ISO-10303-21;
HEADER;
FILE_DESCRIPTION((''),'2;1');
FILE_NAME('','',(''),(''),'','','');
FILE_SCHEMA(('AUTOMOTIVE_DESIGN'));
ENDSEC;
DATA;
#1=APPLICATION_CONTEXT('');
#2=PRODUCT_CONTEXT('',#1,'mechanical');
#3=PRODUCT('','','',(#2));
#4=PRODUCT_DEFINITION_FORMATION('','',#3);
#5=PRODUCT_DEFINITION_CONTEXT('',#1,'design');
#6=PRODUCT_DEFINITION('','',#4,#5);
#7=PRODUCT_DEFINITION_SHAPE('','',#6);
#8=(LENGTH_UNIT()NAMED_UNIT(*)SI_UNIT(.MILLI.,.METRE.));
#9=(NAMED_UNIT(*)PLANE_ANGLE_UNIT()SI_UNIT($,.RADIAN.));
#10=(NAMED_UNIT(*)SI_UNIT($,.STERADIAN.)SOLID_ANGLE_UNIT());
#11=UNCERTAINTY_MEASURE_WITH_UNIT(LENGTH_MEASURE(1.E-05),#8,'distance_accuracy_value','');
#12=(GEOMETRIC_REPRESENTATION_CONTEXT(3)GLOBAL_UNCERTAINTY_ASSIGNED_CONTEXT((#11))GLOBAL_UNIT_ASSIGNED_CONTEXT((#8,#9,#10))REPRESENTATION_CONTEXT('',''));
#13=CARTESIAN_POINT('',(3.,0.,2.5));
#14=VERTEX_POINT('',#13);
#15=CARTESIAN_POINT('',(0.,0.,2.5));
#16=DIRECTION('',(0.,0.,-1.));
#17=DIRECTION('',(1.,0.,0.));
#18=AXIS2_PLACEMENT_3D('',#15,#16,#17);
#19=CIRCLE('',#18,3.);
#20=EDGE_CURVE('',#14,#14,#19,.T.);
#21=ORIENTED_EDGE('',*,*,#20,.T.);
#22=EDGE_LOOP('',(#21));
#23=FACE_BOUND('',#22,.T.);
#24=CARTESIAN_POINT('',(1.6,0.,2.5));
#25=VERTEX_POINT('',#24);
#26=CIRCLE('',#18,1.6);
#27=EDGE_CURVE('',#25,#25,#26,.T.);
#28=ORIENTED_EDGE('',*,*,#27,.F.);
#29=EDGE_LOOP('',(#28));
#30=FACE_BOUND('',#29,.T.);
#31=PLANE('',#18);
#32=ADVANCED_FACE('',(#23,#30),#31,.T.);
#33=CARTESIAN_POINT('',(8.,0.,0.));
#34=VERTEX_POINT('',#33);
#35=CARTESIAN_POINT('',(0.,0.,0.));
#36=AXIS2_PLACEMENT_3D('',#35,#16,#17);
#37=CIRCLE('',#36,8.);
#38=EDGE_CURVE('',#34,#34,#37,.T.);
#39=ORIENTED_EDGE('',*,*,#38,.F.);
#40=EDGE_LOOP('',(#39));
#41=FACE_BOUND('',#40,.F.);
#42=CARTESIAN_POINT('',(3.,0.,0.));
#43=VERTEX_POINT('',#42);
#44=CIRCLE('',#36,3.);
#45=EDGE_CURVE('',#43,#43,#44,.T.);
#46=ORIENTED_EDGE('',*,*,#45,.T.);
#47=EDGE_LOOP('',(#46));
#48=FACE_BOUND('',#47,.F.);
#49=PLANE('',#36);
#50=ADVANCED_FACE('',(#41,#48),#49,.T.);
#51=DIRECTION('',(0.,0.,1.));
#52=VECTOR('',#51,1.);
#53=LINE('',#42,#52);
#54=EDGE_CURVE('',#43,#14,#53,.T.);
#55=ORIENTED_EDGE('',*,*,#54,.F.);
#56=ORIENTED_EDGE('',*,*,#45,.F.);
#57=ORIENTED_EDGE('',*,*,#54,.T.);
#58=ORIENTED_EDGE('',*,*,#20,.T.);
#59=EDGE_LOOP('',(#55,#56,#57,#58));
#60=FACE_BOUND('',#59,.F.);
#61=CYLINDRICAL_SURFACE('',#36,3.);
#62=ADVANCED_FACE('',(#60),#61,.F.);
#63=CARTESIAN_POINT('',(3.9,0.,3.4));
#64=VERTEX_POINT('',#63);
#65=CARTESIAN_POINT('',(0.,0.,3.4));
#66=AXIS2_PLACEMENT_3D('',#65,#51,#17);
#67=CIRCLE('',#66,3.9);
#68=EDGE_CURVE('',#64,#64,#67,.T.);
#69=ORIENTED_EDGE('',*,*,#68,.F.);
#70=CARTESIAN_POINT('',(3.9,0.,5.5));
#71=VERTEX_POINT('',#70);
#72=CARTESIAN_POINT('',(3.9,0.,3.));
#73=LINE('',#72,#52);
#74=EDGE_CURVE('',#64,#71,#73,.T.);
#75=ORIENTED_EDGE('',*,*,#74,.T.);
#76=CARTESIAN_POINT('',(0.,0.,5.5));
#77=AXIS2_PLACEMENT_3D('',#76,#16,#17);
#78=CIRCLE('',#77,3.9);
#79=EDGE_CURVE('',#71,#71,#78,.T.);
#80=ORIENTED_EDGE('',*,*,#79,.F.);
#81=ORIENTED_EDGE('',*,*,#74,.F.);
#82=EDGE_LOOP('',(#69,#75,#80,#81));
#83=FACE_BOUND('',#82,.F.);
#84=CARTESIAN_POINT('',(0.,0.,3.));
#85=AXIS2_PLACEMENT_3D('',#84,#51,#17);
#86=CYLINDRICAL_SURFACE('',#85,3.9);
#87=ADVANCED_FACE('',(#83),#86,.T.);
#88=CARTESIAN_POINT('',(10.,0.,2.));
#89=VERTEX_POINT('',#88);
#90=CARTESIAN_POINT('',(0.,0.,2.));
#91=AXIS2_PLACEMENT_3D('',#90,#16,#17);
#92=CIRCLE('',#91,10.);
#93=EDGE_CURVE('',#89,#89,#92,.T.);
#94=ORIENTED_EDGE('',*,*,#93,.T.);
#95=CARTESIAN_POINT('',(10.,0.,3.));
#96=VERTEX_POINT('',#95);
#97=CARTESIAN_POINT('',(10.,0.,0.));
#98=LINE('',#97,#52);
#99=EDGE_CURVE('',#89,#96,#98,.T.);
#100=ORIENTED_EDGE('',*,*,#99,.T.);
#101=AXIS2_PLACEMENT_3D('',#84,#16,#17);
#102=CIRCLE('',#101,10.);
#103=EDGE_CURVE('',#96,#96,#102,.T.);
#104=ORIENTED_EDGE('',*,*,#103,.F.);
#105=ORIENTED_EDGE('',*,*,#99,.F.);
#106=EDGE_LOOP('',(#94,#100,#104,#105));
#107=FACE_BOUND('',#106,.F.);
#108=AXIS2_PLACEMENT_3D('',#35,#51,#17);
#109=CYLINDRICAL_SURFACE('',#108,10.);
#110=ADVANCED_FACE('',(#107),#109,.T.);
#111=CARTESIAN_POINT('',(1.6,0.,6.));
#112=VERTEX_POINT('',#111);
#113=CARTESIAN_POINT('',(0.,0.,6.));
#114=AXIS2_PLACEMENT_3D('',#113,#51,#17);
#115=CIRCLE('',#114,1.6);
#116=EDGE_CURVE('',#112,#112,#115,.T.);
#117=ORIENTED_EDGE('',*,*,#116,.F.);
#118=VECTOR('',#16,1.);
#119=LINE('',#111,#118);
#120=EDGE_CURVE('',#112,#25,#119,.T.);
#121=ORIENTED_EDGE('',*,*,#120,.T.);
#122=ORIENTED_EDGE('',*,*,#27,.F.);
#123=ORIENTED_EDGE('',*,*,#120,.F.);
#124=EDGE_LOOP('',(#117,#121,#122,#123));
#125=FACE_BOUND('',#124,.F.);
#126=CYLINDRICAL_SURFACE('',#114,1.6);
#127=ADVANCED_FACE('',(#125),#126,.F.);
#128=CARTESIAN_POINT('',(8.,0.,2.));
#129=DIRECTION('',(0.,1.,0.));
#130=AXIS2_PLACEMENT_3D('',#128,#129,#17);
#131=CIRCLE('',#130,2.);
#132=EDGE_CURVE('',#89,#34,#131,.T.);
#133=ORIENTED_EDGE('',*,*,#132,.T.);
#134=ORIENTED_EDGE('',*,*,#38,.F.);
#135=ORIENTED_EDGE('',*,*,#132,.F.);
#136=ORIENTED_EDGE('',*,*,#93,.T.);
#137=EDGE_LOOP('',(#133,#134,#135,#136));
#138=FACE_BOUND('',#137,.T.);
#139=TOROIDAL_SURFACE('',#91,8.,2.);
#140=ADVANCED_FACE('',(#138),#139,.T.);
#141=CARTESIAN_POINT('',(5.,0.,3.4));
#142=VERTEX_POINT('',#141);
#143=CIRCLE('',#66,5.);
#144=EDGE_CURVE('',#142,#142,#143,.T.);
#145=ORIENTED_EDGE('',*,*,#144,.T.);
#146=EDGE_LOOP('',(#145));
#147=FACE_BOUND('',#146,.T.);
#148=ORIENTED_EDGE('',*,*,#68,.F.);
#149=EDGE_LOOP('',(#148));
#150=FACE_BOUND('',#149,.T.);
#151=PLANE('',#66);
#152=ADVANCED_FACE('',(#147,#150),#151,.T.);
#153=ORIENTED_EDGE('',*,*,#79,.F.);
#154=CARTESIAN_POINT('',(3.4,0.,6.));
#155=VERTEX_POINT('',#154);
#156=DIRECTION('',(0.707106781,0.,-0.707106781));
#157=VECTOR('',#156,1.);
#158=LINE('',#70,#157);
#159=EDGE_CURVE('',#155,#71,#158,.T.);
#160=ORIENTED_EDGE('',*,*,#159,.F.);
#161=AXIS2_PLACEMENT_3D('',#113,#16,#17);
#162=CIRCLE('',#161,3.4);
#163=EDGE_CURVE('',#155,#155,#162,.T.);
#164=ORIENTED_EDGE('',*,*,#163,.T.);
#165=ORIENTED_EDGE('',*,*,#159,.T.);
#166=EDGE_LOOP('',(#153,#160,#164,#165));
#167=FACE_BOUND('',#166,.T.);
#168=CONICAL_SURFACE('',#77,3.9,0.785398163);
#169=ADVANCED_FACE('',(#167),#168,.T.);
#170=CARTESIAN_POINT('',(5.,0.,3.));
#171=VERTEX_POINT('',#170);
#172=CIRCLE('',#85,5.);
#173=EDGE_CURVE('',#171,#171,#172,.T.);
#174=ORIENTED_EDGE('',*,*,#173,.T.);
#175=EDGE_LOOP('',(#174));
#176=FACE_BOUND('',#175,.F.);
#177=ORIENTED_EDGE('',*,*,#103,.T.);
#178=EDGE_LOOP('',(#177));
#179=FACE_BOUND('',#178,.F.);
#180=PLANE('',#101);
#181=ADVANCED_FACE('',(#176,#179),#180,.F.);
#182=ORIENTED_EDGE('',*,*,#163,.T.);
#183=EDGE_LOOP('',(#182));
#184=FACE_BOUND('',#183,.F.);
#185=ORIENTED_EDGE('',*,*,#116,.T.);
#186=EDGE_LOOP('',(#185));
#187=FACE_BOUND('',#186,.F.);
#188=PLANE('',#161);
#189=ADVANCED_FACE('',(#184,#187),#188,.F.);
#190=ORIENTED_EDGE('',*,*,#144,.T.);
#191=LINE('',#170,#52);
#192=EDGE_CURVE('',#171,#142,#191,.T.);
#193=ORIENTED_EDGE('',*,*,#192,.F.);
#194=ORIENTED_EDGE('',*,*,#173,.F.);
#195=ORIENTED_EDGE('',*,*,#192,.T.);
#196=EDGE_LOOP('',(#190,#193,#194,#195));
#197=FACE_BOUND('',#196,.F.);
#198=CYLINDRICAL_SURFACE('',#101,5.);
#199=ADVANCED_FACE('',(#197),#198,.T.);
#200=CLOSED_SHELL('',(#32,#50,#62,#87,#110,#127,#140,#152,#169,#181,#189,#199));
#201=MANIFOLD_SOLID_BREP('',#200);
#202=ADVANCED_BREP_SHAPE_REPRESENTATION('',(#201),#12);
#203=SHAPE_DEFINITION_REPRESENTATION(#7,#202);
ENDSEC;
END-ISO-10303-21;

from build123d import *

# Parameters (mm, degrees)
F2_SIZE  = 0.5
F3_R     = 5
F3_R_2   = 3.9
F4_DEPTH = 0.4
F5_R     = 2
F6_R     = 1.6
F7_DEPTH = 25
F8_R     = 3
F8_R_2   = 1.6
F9_DEPTH = 2.5


# Not quite as in the source:
# - a feature names something its author has since deleted; it is built from what else it names


with BuildPart() as f1:
    # F0 (on Front) → F1 (revolve)
    with BuildSketch(Plane.XZ):
        Polygon((3.9, 6), (0, 6), (0, 0), (10, 0), (10, 3), (3.9, 3), align=None)
    revolve(axis=Axis((0, 0, 3), (0, 0, -1)))

    # F2
    f2_edges = [f1.edges().sort_by_distance(p)[0] for p in [
        (-3.9, 0, 6),
    ]]
    chamfer(f2_edges, length=F2_SIZE)

    # F3 (on face) → F4 (join)
    with BuildSketch(Plane.XY.offset(3)):
        Circle(F3_R)
        Circle(F3_R_2, mode=Mode.SUBTRACT)
    extrude(amount=F4_DEPTH)

    # F5
    f5_edges = [f1.edges().sort_by_distance(p)[0] for p in [
        (-10, 0, 0),
    ]]
    fillet(f5_edges, radius=F5_R)

    # F6 (on face) → F7 (cut)
    with BuildSketch(Plane.XY.offset(6)):
        Circle(F6_R)
    extrude(amount=-F7_DEPTH, mode=Mode.SUBTRACT)

    # F8 (on face) → F9 (cut)
    with BuildSketch(Plane(origin=(0, 0, 0), x_dir=(1, 0, 0), z_dir=(0, 0, -1))):
        Circle(F8_R)
        Circle(F8_R_2, mode=Mode.SUBTRACT)
    extrude(amount=-F9_DEPTH, mode=Mode.SUBTRACT)


solid = f1.part
